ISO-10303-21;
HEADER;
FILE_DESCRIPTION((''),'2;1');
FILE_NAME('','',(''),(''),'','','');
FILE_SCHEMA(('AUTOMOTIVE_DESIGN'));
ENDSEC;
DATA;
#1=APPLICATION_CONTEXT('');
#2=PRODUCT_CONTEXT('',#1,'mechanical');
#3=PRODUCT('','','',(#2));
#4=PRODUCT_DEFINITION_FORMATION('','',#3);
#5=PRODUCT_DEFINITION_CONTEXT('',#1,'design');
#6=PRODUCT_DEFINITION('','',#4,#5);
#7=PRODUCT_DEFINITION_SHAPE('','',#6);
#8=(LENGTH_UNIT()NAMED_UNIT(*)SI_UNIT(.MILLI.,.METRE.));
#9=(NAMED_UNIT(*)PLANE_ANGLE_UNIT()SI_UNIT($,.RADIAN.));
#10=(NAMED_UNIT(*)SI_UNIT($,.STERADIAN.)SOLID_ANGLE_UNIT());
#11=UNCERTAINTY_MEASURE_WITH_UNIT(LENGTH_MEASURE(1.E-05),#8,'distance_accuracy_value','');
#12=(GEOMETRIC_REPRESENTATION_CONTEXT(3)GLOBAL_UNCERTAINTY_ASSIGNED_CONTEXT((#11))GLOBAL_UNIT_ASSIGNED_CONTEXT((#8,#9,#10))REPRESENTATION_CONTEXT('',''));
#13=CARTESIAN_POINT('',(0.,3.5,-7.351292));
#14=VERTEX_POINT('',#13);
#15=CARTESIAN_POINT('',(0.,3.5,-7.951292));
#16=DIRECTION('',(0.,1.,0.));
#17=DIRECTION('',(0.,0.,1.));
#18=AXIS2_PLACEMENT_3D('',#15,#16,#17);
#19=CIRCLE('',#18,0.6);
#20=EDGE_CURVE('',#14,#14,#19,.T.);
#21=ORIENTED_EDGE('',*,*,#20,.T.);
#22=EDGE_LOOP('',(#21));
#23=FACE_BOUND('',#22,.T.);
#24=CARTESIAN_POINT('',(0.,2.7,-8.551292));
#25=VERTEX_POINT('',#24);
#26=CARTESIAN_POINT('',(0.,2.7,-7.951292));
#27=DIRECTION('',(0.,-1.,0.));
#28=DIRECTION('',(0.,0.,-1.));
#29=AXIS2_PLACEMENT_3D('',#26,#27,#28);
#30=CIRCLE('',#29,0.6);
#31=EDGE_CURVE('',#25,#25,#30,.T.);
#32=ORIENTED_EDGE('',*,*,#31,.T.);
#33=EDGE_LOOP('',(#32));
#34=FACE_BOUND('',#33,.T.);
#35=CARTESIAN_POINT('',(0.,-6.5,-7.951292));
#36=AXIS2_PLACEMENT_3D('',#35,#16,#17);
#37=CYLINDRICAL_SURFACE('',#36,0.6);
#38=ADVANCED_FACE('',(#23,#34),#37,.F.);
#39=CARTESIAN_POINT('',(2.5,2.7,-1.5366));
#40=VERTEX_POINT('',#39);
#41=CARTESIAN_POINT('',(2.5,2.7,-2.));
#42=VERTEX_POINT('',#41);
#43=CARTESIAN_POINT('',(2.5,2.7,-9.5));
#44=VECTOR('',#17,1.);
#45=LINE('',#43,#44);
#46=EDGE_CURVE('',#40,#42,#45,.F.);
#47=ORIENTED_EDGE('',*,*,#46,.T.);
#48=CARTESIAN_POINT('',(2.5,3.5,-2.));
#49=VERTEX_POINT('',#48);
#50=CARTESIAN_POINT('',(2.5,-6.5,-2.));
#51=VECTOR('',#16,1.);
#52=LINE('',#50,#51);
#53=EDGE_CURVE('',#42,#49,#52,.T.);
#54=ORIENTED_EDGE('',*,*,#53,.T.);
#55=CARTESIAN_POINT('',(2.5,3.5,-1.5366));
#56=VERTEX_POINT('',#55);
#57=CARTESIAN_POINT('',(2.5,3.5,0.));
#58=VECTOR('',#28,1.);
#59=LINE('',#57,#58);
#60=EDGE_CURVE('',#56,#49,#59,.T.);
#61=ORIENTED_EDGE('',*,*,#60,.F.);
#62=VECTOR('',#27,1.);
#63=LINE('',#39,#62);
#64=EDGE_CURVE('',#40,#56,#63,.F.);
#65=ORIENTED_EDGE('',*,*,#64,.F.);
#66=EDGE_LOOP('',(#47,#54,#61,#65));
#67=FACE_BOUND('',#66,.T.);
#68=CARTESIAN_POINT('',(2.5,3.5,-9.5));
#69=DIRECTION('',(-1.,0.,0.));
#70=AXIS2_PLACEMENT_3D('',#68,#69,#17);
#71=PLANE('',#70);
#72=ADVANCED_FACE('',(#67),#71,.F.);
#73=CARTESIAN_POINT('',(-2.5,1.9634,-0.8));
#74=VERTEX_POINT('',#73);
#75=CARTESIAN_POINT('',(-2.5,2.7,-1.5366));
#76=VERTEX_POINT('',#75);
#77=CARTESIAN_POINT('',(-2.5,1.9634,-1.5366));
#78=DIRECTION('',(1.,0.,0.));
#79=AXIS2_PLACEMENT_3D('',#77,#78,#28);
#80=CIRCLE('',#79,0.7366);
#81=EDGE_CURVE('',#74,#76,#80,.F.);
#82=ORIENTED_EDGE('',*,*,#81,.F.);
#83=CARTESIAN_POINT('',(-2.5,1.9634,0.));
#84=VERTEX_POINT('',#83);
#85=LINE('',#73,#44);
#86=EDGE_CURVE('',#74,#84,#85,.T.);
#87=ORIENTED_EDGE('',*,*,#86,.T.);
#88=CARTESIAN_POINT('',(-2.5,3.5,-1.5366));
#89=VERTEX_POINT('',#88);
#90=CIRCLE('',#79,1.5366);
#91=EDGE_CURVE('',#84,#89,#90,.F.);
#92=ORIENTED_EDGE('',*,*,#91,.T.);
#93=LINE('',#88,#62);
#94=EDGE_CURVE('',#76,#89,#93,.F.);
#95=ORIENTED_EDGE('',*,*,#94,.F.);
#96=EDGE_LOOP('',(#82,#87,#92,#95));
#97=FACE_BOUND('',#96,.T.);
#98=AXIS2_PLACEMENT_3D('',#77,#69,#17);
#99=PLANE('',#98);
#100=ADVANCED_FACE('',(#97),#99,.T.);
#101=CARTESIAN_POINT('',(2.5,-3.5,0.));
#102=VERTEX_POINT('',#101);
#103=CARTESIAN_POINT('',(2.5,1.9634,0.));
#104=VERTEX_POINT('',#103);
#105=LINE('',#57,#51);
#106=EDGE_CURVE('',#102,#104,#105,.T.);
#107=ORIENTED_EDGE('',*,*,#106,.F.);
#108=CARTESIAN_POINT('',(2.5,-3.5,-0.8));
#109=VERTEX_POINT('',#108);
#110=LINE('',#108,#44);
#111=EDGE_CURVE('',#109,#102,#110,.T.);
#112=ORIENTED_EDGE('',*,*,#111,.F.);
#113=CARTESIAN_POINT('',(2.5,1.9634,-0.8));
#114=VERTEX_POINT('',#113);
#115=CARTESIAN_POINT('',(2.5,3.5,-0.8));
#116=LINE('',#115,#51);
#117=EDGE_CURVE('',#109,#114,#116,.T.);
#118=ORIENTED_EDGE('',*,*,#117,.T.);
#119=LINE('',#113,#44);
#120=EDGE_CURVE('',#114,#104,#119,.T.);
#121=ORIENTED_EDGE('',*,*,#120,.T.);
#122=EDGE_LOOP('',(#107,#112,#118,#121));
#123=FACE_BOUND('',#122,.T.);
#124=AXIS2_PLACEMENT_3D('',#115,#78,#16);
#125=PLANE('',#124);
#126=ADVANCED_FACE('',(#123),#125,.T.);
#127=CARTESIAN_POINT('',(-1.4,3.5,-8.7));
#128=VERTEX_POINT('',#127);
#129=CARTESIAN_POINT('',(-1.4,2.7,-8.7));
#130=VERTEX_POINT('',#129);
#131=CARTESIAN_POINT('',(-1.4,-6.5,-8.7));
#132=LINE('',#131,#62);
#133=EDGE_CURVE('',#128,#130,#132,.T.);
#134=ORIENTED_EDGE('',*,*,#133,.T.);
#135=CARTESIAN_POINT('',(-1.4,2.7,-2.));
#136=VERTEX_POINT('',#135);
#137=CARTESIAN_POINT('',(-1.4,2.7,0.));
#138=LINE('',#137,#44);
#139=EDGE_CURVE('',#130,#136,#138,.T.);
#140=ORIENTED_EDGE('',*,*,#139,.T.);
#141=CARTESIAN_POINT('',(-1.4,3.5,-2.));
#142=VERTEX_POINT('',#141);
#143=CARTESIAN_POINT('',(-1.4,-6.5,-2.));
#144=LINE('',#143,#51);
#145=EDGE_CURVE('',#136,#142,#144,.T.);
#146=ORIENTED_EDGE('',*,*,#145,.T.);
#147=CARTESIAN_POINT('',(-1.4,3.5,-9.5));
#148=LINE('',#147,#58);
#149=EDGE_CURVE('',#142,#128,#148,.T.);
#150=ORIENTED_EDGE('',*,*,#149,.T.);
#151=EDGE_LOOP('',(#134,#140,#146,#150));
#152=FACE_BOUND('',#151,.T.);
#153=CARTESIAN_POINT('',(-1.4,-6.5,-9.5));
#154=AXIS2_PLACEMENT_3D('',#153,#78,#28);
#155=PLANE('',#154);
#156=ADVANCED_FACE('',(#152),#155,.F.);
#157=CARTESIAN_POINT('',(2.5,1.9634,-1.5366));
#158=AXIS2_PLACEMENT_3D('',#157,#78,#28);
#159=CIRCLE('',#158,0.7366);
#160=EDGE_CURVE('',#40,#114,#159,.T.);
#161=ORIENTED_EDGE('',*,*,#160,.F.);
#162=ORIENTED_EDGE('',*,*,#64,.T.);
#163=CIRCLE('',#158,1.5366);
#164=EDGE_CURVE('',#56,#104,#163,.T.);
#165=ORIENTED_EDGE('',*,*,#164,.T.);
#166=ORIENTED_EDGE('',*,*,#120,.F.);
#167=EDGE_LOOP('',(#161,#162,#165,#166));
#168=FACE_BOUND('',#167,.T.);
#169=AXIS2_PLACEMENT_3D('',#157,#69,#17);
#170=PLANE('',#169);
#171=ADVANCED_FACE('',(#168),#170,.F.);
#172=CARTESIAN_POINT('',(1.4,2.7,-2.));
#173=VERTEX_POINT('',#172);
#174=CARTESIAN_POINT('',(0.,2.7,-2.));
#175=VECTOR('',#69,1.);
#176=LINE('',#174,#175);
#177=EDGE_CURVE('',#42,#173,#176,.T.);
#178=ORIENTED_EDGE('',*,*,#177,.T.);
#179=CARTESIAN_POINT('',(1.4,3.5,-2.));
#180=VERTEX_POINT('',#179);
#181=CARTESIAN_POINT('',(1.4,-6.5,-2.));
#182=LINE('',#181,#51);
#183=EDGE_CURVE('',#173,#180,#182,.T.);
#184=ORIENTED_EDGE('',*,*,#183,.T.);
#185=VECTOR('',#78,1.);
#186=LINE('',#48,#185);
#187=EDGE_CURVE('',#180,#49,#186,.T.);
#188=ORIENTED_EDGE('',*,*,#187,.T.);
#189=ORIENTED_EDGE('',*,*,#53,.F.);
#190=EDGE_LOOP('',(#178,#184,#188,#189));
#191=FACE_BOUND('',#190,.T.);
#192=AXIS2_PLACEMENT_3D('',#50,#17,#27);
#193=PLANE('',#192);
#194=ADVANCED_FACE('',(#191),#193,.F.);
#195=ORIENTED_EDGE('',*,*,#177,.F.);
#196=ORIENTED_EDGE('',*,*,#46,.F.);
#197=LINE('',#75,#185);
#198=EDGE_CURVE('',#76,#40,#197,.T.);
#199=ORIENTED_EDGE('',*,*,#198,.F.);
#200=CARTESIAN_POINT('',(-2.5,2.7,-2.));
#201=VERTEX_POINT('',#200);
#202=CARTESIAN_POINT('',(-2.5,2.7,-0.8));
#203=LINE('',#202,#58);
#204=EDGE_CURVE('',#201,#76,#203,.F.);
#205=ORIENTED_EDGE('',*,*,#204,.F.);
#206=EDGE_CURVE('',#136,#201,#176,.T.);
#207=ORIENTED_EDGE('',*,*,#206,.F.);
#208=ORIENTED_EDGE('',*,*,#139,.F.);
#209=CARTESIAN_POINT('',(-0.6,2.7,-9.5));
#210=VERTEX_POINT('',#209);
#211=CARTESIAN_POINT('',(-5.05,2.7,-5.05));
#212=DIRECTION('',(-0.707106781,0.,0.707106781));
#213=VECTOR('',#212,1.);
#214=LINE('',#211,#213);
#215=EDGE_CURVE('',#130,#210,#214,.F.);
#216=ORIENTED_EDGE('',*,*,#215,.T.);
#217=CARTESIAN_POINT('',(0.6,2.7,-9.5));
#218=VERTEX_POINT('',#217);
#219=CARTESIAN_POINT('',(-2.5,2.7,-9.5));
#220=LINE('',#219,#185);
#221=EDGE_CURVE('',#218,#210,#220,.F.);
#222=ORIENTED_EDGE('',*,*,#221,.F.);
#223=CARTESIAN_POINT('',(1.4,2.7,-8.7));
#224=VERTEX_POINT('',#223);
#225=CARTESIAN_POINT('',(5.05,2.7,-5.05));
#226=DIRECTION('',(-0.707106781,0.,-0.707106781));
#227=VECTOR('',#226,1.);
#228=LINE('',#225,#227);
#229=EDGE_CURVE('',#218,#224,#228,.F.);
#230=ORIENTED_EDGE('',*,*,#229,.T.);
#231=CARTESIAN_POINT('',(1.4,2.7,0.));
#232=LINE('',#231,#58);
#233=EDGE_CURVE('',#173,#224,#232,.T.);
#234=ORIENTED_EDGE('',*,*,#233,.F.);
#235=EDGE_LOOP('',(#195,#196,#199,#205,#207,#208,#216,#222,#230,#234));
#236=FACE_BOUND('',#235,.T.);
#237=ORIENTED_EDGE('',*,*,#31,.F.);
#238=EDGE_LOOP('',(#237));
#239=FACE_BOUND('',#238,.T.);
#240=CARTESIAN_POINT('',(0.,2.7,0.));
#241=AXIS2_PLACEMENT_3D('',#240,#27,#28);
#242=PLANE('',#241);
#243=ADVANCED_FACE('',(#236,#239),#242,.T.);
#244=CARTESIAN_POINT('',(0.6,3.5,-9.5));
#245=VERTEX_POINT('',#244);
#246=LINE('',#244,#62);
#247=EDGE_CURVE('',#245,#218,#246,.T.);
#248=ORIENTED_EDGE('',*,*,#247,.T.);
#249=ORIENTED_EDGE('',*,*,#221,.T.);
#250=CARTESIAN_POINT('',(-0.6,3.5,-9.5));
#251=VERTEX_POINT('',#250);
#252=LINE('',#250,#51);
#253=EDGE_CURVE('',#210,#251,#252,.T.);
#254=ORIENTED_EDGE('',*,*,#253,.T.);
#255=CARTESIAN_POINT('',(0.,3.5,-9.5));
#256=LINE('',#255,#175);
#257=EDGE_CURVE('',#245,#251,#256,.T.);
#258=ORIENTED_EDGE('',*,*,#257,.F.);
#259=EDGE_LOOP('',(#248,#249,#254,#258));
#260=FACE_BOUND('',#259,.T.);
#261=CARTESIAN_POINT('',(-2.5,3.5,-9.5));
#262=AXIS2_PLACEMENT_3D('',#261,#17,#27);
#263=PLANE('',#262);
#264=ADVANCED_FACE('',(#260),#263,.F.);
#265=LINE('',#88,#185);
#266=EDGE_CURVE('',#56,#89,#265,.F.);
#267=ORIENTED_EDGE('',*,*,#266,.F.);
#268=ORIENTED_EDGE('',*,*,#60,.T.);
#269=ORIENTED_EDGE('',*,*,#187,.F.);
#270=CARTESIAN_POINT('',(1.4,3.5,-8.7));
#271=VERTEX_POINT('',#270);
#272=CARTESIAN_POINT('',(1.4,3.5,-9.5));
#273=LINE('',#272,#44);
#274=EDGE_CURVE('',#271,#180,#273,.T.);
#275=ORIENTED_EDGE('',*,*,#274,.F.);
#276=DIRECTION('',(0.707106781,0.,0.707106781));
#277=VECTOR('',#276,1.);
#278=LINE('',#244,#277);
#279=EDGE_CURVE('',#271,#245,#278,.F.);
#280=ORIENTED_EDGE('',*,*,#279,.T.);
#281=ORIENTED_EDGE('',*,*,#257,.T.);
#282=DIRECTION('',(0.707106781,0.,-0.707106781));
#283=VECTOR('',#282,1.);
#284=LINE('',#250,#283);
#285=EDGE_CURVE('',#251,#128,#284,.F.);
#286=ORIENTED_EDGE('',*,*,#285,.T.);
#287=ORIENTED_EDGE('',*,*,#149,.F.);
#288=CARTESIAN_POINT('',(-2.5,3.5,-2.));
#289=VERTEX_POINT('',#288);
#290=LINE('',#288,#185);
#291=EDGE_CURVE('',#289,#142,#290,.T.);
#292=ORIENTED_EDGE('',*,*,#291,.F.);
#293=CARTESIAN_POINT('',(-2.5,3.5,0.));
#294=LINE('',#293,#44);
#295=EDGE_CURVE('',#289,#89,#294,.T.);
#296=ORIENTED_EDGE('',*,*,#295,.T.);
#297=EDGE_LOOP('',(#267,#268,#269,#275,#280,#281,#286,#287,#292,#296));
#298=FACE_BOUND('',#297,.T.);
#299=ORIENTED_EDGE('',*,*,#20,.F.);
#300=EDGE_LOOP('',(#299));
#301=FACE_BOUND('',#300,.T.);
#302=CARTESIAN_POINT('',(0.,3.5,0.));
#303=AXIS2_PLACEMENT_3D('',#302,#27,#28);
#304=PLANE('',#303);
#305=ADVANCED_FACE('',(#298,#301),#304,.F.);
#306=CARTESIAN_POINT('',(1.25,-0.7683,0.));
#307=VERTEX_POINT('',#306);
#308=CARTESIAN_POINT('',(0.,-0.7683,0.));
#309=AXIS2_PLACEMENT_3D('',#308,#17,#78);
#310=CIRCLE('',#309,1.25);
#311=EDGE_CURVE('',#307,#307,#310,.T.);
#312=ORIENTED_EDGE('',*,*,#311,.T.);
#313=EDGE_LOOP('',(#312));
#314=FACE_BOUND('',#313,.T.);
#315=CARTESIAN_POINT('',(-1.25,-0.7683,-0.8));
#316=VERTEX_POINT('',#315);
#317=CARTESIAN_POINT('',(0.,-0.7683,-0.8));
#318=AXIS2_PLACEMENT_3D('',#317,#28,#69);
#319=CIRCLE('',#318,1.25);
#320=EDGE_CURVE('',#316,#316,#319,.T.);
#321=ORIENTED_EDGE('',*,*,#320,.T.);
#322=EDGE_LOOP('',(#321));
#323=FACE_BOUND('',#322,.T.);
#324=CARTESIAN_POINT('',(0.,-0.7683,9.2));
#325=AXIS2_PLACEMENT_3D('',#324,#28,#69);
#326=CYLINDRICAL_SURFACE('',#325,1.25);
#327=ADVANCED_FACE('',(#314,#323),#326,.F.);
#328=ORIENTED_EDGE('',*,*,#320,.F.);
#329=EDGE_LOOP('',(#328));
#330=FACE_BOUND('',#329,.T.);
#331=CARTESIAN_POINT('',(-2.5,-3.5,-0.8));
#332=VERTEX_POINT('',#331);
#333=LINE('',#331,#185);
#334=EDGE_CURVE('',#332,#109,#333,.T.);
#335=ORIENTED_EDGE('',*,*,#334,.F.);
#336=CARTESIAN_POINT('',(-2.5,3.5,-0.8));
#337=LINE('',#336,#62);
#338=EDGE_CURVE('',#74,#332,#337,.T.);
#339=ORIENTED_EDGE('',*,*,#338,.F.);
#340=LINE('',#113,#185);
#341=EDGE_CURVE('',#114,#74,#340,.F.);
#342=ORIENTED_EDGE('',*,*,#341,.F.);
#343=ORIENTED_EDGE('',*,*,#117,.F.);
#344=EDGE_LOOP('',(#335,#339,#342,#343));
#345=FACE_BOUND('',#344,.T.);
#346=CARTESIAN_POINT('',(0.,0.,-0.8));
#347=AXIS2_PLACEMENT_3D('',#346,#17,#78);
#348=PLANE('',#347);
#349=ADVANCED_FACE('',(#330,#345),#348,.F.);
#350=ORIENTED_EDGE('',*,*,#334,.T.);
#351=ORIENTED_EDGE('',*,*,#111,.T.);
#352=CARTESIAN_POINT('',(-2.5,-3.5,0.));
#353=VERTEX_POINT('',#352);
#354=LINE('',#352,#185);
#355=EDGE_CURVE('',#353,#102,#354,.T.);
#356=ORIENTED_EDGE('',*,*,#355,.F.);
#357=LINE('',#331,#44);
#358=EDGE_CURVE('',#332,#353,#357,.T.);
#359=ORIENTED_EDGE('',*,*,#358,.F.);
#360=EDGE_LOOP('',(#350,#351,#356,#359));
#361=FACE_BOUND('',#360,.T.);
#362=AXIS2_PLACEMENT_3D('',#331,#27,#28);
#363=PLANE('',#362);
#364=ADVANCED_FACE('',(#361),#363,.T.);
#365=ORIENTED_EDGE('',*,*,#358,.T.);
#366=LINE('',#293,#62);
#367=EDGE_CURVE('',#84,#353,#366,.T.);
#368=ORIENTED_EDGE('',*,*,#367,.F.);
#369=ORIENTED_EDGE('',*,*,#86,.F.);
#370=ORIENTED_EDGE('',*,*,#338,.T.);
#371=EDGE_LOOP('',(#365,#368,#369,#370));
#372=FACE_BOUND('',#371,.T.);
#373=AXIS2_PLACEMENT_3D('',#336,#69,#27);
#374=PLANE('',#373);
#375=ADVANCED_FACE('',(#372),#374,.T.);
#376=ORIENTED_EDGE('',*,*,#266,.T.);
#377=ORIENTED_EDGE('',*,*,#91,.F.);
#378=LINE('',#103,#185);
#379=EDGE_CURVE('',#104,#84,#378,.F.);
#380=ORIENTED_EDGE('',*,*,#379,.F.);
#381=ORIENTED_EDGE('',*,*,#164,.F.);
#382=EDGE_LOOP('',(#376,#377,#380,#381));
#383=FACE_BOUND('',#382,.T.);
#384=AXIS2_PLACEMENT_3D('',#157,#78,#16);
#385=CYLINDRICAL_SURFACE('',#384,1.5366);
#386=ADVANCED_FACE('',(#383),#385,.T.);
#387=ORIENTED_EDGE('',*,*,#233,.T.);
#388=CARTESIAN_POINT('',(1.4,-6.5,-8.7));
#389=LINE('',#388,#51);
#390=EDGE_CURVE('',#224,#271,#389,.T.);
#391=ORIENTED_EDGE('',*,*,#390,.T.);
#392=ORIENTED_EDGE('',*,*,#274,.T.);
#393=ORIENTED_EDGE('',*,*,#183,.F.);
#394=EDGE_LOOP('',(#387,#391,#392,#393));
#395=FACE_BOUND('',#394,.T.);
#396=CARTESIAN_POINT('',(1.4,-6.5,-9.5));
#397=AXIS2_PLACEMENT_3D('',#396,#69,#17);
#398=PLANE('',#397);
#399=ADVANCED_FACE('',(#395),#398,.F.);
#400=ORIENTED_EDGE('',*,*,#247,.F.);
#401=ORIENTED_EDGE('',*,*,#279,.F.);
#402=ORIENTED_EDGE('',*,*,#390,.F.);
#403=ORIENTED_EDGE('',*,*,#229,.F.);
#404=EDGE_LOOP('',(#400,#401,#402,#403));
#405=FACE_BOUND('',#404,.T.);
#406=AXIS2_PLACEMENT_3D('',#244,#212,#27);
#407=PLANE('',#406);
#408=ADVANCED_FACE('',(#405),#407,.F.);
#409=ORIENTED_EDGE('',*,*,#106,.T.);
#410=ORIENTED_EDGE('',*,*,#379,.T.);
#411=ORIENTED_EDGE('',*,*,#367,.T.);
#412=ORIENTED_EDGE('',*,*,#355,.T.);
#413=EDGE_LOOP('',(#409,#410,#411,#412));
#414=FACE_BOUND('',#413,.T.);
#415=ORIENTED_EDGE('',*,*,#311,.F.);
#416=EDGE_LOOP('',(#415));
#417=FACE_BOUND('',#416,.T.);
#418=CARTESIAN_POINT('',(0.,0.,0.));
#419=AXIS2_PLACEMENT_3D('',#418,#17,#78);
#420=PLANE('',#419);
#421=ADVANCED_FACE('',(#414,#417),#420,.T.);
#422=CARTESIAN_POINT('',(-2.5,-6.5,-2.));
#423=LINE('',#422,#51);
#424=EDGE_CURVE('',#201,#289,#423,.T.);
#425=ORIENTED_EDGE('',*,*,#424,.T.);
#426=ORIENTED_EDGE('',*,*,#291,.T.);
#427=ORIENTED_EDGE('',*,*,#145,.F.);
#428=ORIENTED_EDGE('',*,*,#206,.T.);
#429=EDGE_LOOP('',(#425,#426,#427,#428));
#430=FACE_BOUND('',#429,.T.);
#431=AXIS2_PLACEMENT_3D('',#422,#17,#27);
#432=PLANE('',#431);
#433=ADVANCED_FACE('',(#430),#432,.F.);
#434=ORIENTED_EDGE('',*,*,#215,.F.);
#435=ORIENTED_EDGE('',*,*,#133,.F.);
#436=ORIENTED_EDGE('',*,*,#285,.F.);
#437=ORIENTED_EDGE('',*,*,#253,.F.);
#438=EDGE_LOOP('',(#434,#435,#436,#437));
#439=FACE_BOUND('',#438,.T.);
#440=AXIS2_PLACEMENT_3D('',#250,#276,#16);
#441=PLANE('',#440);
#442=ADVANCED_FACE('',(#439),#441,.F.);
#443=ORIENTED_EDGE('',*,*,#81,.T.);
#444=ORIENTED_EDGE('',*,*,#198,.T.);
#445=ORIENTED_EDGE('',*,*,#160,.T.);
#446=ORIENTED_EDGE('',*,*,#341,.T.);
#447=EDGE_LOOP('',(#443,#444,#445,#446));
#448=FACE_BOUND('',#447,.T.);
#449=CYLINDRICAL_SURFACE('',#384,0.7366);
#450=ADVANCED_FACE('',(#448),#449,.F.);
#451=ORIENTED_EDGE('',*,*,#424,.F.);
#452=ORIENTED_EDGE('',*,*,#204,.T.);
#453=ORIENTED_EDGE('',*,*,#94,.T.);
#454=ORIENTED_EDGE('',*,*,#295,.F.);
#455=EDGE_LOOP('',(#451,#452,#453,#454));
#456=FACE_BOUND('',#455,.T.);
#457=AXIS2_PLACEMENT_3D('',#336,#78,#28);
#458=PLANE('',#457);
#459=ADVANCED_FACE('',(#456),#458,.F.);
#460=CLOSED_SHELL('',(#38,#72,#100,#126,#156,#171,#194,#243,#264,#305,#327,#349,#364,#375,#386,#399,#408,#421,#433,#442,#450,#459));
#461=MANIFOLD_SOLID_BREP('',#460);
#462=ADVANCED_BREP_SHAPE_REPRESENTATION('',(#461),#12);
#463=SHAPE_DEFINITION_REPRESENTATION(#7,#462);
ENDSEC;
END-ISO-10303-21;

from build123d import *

# Parameters (mm, degrees)
SKETCH_1_W                       = 5
SKETCH_1_H                       = 7
SM_BASE_FLANGE_1_DEPTH           = 0.8
SM_EDGE_FLANGE_1_STRIP_W         = 4.6732
SM_EDGE_FLANGE_1_STRIP_H         = 0.8
SM_EDGE_FLANGE_1_STRIP_CUT_DEPTH = 5
SM_EDGE_FLANGE_1_DEPTH           = 5
SKETCH_7_R                       = 1.25
CUT_EXTRUDE_1_DEPTH              = 10
SKETCH_8_W                       = 1.1
SKETCH_8_H                       = 7.5
CUT_EXTRUDE_2_DEPTH              = 10
SKETCH_9_R                       = 0.6
CUT_EXTRUDE_3_DEPTH              = 10
CHAMFER_1_SIZE                   = 0.8


# Sheet-metal steps are written as plain solids
with BuildPart() as part:
    # Sketch 1 → 基体-法兰1 (new body)
    with BuildSketch(Plane.XY):
        Rectangle(SKETCH_1_W, SKETCH_1_H)
    extrude(amount=-SM_BASE_FLANGE_1_DEPTH)

    # 边线-法兰1 strip (across the edge) → 边线-法兰1 strip cut (cut)
    with BuildSketch(Plane(origin=(-2.5, 3.5, -0.8), x_dir=(0, -1, 0), z_dir=(1, 0, 0))):
        with Locations((-0.8, -0.4)):
            Rectangle(SM_EDGE_FLANGE_1_STRIP_W, SM_EDGE_FLANGE_1_STRIP_H)
    extrude(amount=SM_EDGE_FLANGE_1_STRIP_CUT_DEPTH, mode=Mode.SUBTRACT)

    # 边线-法兰1 section (across the edge) → 边线-法兰1 (add)
    with BuildSketch(Plane(origin=(-2.5, 3.5, -0.8), x_dir=(0, -1, 0), z_dir=(1, 0, 0))):
        with BuildLine():
            Line((0, 0.7366), (0, 8.7))
            Line((0, 8.7), (0.8, 8.7))
            Line((0.8, 8.7), (0.8, 0.7366))
            ThreePointArc((0.8, 0.7366), (1.015745145, 0.215745145), (1.5366, 0))
            Line((1.5366, 0), (1.5366, -0.8))
            ThreePointArc((1.5366, -0.8), (0.45005972, -0.34994028), (0, 0.7366))
        make_face()
    extrude(amount=SM_EDGE_FLANGE_1_DEPTH)

    # 草图7 → 切除-拉伸1 (cut)
    with BuildSketch(Plane(origin=(0, 0, -0.8), x_dir=(-1, 0, 0), z_dir=(0, 0, -1))):
        with Locations((0, -0.7683)):
            Circle(SKETCH_7_R)
    extrude(amount=-CUT_EXTRUDE_1_DEPTH, mode=Mode.SUBTRACT)

    # 草图8 → 切除-拉伸2 (cut)
    with BuildSketch(Plane(origin=(0, 3.5, 0), x_dir=(1, 0, 0), z_dir=(0, 1, 0))):
        with Locations((1.95, 5.75)):
            Rectangle(SKETCH_8_W, SKETCH_8_H)
        with Locations((-1.95, 5.75)):
            Rectangle(SKETCH_8_W, SKETCH_8_H)
    extrude(amount=-CUT_EXTRUDE_2_DEPTH, mode=Mode.SUBTRACT)

    # 草图9 → 切除-拉伸3 (cut)
    with BuildSketch(Plane(origin=(0, 3.5, 0), x_dir=(1, 0, 0), z_dir=(0, 1, 0))):
        with Locations(Location((0, 7.951292253, 0), (0, 0, 270))):
            Circle(SKETCH_9_R)
    extrude(amount=-CUT_EXTRUDE_3_DEPTH, mode=Mode.SUBTRACT)

    # 倒角1
    chamfer_1_edges = [part.edges().sort_by_distance(p)[0] for p in [
        (-1.4, 3.1, -9.5),
        (1.4, 3.1, -9.5),
    ]]
    chamfer(chamfer_1_edges, length=CHAMFER_1_SIZE)


solid = part.part
